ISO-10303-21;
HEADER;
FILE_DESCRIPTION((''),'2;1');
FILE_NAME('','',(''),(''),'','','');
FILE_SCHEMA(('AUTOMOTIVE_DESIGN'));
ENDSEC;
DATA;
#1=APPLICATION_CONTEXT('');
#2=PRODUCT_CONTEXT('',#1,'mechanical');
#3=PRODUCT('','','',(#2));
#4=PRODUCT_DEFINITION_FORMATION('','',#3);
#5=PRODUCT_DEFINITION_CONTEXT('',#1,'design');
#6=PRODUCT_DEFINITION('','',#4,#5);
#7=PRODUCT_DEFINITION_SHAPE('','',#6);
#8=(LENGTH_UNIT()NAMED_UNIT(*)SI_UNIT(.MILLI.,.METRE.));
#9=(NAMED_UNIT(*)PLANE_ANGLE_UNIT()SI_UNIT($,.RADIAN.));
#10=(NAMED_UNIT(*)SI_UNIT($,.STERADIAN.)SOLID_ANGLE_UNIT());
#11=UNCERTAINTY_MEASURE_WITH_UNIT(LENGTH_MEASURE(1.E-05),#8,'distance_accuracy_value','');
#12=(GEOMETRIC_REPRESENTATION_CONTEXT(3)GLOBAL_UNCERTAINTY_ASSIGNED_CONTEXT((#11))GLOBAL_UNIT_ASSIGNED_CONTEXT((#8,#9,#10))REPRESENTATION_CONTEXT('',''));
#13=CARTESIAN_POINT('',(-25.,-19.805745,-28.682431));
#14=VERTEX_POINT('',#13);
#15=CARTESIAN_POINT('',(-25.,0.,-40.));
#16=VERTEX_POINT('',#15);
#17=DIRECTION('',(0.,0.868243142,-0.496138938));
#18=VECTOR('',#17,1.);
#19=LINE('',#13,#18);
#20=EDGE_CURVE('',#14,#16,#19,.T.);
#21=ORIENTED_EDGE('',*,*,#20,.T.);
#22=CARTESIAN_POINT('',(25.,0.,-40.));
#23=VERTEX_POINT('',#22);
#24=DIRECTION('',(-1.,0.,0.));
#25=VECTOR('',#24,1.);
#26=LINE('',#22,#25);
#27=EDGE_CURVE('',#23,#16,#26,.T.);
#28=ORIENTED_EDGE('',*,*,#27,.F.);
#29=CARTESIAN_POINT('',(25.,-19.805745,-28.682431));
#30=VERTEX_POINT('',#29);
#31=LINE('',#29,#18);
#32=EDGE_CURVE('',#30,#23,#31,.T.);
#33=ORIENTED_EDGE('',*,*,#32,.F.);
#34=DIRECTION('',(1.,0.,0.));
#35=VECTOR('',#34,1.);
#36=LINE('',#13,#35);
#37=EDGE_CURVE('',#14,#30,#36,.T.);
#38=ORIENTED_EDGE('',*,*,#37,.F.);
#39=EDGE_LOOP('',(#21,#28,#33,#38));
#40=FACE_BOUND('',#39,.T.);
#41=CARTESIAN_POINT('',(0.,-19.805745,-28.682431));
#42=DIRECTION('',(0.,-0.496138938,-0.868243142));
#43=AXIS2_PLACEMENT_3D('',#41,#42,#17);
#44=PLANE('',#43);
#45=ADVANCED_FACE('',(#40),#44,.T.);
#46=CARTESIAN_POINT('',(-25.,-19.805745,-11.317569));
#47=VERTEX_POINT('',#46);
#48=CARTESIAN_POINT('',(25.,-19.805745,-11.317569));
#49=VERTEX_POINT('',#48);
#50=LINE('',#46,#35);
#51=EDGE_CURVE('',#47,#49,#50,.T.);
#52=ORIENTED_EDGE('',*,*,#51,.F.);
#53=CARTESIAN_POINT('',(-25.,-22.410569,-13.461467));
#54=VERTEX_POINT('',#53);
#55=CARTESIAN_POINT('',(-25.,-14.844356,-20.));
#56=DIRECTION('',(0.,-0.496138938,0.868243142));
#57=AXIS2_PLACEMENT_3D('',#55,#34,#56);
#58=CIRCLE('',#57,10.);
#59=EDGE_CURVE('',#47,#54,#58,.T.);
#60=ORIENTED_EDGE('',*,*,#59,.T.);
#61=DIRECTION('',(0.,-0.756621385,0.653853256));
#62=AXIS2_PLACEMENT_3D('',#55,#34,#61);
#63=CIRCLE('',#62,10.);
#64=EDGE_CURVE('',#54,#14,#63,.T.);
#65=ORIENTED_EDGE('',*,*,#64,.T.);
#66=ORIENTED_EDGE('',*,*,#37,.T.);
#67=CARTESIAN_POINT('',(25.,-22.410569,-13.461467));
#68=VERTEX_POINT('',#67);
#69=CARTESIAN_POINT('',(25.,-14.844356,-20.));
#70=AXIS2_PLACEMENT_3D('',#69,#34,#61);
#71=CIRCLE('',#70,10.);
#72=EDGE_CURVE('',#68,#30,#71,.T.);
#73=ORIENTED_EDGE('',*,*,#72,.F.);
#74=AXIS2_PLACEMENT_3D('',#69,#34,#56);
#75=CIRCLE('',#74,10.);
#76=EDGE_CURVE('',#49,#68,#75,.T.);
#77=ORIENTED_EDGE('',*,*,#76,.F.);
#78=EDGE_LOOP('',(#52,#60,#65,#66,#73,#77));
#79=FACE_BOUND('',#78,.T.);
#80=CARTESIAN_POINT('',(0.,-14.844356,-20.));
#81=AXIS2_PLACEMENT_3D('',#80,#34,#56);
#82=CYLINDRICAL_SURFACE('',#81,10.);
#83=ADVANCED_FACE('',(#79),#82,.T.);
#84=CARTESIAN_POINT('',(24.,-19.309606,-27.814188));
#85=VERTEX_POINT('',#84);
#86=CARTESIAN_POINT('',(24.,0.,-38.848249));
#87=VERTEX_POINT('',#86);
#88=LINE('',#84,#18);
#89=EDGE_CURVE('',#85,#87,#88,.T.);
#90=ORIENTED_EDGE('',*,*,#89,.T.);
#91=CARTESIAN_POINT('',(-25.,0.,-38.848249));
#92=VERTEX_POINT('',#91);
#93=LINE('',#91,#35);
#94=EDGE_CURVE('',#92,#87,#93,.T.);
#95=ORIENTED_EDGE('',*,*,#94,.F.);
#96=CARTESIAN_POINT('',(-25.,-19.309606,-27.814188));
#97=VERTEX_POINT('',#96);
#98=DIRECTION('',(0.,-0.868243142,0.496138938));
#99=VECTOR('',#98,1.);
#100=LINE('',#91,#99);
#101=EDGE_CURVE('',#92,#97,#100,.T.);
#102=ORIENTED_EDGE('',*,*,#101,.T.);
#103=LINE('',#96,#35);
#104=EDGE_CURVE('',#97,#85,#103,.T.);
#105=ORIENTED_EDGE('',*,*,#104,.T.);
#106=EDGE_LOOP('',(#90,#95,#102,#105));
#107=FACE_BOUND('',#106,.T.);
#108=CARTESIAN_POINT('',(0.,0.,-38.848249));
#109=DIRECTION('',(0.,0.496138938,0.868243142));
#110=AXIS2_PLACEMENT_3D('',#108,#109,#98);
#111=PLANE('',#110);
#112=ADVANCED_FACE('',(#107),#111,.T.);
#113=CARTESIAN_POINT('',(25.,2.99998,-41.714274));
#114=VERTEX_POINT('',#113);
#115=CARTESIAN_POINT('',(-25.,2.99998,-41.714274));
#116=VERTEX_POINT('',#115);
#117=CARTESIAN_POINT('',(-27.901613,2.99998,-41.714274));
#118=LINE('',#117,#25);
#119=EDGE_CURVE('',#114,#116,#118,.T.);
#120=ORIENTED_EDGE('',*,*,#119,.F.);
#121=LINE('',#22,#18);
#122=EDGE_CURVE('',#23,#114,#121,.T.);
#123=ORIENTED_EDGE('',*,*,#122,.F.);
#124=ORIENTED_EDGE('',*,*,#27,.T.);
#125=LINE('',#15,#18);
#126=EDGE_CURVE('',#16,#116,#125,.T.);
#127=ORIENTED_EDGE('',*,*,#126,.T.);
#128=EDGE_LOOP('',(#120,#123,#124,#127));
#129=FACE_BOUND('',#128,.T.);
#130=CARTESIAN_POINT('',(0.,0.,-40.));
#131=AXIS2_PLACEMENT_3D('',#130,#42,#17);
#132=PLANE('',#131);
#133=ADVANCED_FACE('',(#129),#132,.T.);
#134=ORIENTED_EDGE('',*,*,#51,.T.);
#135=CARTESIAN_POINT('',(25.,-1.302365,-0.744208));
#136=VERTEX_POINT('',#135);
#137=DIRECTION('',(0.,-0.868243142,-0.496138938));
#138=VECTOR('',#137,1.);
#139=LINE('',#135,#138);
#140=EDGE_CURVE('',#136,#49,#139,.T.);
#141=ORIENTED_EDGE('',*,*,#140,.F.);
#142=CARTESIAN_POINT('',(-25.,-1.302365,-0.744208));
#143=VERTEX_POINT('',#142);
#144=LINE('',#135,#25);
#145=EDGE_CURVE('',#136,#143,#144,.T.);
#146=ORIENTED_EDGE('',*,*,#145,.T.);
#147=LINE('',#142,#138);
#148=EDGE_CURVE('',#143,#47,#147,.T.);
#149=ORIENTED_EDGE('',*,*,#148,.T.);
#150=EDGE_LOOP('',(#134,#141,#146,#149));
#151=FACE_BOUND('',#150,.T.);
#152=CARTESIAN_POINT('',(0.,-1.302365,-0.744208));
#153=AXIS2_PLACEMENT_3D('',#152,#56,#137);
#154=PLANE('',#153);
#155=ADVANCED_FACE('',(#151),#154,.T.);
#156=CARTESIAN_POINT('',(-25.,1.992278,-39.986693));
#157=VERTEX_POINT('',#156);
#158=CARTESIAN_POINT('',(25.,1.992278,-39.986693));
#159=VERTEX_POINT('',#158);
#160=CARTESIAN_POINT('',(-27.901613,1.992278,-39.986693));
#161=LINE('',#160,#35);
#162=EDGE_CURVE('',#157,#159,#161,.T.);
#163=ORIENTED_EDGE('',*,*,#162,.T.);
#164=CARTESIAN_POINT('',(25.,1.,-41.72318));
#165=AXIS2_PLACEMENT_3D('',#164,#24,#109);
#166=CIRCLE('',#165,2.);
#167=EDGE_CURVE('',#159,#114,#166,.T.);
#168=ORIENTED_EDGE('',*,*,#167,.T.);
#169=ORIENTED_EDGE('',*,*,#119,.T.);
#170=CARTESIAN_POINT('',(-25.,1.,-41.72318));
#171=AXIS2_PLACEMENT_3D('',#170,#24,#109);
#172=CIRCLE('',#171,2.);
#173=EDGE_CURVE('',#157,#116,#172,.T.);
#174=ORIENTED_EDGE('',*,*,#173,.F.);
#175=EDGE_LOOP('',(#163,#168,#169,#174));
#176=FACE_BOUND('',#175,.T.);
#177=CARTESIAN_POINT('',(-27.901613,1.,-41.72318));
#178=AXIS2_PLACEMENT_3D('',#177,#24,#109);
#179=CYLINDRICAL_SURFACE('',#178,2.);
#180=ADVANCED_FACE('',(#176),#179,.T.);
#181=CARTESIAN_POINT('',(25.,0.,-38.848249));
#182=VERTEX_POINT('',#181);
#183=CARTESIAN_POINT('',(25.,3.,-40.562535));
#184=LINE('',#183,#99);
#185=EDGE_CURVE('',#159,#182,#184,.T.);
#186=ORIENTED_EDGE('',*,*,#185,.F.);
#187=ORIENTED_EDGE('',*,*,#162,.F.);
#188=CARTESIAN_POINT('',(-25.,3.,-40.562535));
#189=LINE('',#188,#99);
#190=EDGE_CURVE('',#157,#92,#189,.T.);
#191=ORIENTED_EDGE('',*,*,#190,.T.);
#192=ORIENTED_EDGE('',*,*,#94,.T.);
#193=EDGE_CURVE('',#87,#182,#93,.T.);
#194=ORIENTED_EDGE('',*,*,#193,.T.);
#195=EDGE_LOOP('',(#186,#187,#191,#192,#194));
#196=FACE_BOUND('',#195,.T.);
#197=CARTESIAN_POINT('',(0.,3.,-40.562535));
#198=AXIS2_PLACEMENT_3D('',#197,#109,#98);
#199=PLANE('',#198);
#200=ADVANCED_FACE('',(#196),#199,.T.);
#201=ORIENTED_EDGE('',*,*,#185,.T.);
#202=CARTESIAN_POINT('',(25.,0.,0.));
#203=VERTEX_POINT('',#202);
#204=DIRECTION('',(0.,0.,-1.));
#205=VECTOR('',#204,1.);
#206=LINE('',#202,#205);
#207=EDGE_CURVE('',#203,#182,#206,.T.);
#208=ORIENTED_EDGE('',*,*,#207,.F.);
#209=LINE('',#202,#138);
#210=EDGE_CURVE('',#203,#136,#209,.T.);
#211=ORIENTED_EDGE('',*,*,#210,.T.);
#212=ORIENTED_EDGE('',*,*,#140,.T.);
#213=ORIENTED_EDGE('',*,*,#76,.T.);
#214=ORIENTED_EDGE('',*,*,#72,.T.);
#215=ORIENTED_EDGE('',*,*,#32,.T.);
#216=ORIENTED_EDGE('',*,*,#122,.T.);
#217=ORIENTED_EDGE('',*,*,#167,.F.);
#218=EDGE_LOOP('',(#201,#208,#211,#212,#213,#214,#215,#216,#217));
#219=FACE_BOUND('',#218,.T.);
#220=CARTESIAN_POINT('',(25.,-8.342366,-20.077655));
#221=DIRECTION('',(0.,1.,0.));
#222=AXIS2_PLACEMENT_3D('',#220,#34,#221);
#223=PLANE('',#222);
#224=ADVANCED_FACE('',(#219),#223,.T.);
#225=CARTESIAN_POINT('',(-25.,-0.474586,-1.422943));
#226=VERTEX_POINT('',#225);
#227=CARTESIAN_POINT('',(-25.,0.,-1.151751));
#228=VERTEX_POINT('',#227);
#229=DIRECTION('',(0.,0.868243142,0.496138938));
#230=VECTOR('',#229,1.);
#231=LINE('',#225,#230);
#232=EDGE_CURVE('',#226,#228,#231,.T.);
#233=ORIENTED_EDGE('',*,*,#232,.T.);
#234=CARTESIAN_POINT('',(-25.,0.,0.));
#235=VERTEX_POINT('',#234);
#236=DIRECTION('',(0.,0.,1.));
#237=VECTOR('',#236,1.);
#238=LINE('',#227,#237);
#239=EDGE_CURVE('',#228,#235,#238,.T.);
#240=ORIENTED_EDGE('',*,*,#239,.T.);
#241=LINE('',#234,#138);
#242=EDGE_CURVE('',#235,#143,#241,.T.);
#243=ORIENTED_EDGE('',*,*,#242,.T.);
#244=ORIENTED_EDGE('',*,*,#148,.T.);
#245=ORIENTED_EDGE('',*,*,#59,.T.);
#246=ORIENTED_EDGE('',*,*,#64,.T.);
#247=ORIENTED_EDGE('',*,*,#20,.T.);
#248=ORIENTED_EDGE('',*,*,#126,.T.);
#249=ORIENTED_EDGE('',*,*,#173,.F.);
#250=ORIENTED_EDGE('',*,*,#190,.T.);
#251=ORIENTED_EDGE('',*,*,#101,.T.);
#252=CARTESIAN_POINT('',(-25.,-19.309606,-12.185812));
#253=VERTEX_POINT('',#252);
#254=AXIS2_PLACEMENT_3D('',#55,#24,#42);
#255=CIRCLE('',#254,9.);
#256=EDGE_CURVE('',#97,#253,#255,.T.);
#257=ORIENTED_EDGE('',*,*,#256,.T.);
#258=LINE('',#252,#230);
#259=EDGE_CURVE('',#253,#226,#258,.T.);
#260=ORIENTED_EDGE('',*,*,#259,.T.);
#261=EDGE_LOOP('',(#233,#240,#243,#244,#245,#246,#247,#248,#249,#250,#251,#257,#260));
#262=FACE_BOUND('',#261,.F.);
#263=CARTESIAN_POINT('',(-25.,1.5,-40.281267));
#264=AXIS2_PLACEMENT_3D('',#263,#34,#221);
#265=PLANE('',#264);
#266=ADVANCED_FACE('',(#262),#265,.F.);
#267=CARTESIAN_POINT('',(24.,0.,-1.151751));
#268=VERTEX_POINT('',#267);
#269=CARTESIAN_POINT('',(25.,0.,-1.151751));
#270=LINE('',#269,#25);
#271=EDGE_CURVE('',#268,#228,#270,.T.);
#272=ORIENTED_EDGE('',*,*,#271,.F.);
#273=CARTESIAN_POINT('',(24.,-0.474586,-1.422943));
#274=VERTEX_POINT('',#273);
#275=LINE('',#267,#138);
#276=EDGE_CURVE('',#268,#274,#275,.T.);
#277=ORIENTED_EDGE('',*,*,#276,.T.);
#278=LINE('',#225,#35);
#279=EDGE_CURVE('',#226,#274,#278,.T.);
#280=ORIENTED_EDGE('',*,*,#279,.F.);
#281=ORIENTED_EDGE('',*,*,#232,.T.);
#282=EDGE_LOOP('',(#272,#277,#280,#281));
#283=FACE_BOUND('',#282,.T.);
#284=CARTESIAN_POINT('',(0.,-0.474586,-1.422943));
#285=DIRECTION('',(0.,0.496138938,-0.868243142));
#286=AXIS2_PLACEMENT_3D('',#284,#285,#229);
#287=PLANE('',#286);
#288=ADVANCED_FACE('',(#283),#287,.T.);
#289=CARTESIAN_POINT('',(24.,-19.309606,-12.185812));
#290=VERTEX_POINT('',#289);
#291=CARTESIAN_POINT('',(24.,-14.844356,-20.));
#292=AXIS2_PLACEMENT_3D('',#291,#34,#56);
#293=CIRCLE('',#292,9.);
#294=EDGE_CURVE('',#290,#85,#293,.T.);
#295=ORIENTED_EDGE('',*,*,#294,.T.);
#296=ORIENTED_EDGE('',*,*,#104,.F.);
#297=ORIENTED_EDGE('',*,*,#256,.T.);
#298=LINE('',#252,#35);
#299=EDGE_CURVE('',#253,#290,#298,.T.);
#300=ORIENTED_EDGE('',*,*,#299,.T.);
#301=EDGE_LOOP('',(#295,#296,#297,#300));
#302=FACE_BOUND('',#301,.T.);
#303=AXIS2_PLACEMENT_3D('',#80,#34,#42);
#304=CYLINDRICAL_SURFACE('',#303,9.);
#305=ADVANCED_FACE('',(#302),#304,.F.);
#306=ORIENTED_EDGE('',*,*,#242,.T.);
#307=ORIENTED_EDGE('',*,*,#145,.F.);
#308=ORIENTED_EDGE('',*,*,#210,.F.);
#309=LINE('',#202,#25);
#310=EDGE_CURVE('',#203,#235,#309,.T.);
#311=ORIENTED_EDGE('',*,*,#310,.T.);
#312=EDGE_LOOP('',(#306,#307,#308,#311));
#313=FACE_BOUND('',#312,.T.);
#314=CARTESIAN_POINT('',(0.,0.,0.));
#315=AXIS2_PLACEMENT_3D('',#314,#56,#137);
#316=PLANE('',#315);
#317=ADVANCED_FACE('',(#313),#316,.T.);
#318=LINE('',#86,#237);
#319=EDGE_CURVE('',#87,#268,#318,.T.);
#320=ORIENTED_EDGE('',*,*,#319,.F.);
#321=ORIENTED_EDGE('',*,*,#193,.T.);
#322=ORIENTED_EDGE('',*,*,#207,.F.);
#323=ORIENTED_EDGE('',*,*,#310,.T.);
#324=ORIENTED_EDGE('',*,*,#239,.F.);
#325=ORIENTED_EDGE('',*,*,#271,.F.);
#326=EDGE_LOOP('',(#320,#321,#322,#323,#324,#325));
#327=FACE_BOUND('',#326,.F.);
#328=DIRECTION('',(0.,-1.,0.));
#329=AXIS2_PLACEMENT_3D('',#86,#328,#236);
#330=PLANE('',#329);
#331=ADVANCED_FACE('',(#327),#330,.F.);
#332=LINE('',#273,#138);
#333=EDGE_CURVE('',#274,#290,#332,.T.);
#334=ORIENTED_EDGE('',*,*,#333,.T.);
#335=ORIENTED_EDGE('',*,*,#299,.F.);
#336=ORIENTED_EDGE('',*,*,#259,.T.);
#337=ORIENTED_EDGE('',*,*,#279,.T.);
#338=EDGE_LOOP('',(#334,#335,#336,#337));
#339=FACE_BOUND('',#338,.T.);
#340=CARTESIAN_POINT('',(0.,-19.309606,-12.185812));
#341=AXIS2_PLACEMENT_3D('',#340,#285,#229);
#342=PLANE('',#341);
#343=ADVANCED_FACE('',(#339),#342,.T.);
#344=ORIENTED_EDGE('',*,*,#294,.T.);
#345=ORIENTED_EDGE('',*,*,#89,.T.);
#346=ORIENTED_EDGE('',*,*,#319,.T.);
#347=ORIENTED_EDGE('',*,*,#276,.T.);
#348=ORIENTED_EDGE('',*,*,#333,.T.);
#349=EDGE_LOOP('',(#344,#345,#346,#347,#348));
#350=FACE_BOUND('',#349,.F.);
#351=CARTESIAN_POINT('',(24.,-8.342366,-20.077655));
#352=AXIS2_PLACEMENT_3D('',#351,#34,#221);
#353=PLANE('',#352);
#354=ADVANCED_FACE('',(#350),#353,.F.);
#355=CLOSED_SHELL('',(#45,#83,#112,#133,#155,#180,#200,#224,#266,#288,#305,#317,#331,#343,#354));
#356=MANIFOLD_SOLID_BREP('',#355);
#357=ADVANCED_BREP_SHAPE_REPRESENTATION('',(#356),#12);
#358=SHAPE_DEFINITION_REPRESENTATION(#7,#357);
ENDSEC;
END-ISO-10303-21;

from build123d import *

# Parameters (mm, degrees)
F1_DEPTH      = 25
F1_DEPTH_BACK = 25
F2_DEPTH      = 25
F2_DEPTH_BACK = 25
F3_T1_DEPTH   = 55.8032253547
F4_START      = 24
F4_DEPTH      = 1


# Not quite as in the source:
# - a fillet or chamfer that OpenCascade refuses, or shapes differently, is made with other operations: its cross-section is extruded or revolved along the edge and cut away or added


with BuildPart() as f1:
    # F0 (on Right) → F1 (new body, two sides)
    with BuildSketch(Plane.YZ) as f1_sk:
        with BuildLine():
            ThreePointArc((-0.474586405, -1.4229433383), (-0.9510831171, -1.1599314222), (-1.3023647132, -0.7442084075))
            Line((-1.3023647132, -0.7442084075), (-19.8057450128, -11.3175685788))
            ThreePointArc((-19.8057450128, -11.3175685788), (-21.1992188281, -12.2788787263), (-22.4105694786, -13.461467444))
            ThreePointArc((-22.4105694786, -13.461467444), (-24.7010613056, -21.6868174799), (-19.8057450128, -28.6824314212))
            Line((-19.8057450128, -28.6824314212), (0, -40))
            Line((0, -40), (0, -38.8482488931))
            Line((0, -38.8482488931), (-19.3096060745, -27.8141882791))
            ThreePointArc((-19.3096060745, -27.8141882791), (-23.8443556293, -20), (-19.3096060745, -12.1858117209))
            Line((-19.3096060745, -12.1858117209), (-0.474586405, -1.4229433383))
        make_face()
        with BuildLine():
            Line((0, 0), (-1.3023647132, -0.7442084075))
            ThreePointArc((-1.3023647132, -0.7442084075), (-0.9510831171, -1.1599314222), (-0.474586405, -1.4229433383))
            Line((-0.474586405, -1.4229433383), (0, -1.1517511069))
            Line((0, -1.1517511069), (0, 0))
        make_face()
    extrude(amount=F1_DEPTH)
    extrude(f1_sk.sketch, amount=-F1_DEPTH_BACK)

    # F0 (on Right) → F2 (join, two sides)
    with BuildSketch(Plane.YZ) as f2_sk:
        Polygon((3, -40.5625346074), (0, -38.8482488931), (0, -40), (3, -41.7142857143), align=None)
    extrude(amount=F2_DEPTH)
    extrude(f2_sk.sketch, amount=-F2_DEPTH_BACK)

    # F3: fillet of radius 2 on 1 edges, made by hand

    # F3_s2 → F3_t1 (cut)
    with BuildSketch(Plane.YZ.offset(-27.9016126774)):
        with BuildLine():
            ThreePointArc((1.9922778767, -39.9866933941), (2.7298201862, -40.7193260419), (3, -41.7231796783))
            Line((3, -41.7231796783), (3, -40.5625346074))
            Line((3, -40.5625346074), (1.9922778767, -39.9866933941))
        make_face()
    extrude(amount=F3_T1_DEPTH, mode=Mode.SUBTRACT)

    # F0 (on Right) → F4 (join)
    with BuildSketch(Plane.YZ.offset(F4_START)):
        with BuildLine():
            Line((0, -38.8482488931), (0, -1.5))
            ThreePointArc((0, -1.5), (-0.2404006993, -1.4806105172), (-0.474586405, -1.4229433383))
            Line((-0.474586405, -1.4229433383), (-19.3096060745, -12.1858117209))
            ThreePointArc((-19.3096060745, -12.1858117209), (-23.8443556293, -20), (-19.3096060745, -27.8141882791))
            Line((-19.3096060745, -27.8141882791), (0, -38.8482488931))
        make_face()
        with BuildLine():
            ThreePointArc((-0.474586405, -1.4229433383), (-0.2404006993, -1.4806105172), (0, -1.5))
            Line((0, -1.5), (0, -1.1517511069))
            Line((0, -1.1517511069), (-0.474586405, -1.4229433383))
        make_face()
    extrude(amount=F4_DEPTH)


solid = f1.part
